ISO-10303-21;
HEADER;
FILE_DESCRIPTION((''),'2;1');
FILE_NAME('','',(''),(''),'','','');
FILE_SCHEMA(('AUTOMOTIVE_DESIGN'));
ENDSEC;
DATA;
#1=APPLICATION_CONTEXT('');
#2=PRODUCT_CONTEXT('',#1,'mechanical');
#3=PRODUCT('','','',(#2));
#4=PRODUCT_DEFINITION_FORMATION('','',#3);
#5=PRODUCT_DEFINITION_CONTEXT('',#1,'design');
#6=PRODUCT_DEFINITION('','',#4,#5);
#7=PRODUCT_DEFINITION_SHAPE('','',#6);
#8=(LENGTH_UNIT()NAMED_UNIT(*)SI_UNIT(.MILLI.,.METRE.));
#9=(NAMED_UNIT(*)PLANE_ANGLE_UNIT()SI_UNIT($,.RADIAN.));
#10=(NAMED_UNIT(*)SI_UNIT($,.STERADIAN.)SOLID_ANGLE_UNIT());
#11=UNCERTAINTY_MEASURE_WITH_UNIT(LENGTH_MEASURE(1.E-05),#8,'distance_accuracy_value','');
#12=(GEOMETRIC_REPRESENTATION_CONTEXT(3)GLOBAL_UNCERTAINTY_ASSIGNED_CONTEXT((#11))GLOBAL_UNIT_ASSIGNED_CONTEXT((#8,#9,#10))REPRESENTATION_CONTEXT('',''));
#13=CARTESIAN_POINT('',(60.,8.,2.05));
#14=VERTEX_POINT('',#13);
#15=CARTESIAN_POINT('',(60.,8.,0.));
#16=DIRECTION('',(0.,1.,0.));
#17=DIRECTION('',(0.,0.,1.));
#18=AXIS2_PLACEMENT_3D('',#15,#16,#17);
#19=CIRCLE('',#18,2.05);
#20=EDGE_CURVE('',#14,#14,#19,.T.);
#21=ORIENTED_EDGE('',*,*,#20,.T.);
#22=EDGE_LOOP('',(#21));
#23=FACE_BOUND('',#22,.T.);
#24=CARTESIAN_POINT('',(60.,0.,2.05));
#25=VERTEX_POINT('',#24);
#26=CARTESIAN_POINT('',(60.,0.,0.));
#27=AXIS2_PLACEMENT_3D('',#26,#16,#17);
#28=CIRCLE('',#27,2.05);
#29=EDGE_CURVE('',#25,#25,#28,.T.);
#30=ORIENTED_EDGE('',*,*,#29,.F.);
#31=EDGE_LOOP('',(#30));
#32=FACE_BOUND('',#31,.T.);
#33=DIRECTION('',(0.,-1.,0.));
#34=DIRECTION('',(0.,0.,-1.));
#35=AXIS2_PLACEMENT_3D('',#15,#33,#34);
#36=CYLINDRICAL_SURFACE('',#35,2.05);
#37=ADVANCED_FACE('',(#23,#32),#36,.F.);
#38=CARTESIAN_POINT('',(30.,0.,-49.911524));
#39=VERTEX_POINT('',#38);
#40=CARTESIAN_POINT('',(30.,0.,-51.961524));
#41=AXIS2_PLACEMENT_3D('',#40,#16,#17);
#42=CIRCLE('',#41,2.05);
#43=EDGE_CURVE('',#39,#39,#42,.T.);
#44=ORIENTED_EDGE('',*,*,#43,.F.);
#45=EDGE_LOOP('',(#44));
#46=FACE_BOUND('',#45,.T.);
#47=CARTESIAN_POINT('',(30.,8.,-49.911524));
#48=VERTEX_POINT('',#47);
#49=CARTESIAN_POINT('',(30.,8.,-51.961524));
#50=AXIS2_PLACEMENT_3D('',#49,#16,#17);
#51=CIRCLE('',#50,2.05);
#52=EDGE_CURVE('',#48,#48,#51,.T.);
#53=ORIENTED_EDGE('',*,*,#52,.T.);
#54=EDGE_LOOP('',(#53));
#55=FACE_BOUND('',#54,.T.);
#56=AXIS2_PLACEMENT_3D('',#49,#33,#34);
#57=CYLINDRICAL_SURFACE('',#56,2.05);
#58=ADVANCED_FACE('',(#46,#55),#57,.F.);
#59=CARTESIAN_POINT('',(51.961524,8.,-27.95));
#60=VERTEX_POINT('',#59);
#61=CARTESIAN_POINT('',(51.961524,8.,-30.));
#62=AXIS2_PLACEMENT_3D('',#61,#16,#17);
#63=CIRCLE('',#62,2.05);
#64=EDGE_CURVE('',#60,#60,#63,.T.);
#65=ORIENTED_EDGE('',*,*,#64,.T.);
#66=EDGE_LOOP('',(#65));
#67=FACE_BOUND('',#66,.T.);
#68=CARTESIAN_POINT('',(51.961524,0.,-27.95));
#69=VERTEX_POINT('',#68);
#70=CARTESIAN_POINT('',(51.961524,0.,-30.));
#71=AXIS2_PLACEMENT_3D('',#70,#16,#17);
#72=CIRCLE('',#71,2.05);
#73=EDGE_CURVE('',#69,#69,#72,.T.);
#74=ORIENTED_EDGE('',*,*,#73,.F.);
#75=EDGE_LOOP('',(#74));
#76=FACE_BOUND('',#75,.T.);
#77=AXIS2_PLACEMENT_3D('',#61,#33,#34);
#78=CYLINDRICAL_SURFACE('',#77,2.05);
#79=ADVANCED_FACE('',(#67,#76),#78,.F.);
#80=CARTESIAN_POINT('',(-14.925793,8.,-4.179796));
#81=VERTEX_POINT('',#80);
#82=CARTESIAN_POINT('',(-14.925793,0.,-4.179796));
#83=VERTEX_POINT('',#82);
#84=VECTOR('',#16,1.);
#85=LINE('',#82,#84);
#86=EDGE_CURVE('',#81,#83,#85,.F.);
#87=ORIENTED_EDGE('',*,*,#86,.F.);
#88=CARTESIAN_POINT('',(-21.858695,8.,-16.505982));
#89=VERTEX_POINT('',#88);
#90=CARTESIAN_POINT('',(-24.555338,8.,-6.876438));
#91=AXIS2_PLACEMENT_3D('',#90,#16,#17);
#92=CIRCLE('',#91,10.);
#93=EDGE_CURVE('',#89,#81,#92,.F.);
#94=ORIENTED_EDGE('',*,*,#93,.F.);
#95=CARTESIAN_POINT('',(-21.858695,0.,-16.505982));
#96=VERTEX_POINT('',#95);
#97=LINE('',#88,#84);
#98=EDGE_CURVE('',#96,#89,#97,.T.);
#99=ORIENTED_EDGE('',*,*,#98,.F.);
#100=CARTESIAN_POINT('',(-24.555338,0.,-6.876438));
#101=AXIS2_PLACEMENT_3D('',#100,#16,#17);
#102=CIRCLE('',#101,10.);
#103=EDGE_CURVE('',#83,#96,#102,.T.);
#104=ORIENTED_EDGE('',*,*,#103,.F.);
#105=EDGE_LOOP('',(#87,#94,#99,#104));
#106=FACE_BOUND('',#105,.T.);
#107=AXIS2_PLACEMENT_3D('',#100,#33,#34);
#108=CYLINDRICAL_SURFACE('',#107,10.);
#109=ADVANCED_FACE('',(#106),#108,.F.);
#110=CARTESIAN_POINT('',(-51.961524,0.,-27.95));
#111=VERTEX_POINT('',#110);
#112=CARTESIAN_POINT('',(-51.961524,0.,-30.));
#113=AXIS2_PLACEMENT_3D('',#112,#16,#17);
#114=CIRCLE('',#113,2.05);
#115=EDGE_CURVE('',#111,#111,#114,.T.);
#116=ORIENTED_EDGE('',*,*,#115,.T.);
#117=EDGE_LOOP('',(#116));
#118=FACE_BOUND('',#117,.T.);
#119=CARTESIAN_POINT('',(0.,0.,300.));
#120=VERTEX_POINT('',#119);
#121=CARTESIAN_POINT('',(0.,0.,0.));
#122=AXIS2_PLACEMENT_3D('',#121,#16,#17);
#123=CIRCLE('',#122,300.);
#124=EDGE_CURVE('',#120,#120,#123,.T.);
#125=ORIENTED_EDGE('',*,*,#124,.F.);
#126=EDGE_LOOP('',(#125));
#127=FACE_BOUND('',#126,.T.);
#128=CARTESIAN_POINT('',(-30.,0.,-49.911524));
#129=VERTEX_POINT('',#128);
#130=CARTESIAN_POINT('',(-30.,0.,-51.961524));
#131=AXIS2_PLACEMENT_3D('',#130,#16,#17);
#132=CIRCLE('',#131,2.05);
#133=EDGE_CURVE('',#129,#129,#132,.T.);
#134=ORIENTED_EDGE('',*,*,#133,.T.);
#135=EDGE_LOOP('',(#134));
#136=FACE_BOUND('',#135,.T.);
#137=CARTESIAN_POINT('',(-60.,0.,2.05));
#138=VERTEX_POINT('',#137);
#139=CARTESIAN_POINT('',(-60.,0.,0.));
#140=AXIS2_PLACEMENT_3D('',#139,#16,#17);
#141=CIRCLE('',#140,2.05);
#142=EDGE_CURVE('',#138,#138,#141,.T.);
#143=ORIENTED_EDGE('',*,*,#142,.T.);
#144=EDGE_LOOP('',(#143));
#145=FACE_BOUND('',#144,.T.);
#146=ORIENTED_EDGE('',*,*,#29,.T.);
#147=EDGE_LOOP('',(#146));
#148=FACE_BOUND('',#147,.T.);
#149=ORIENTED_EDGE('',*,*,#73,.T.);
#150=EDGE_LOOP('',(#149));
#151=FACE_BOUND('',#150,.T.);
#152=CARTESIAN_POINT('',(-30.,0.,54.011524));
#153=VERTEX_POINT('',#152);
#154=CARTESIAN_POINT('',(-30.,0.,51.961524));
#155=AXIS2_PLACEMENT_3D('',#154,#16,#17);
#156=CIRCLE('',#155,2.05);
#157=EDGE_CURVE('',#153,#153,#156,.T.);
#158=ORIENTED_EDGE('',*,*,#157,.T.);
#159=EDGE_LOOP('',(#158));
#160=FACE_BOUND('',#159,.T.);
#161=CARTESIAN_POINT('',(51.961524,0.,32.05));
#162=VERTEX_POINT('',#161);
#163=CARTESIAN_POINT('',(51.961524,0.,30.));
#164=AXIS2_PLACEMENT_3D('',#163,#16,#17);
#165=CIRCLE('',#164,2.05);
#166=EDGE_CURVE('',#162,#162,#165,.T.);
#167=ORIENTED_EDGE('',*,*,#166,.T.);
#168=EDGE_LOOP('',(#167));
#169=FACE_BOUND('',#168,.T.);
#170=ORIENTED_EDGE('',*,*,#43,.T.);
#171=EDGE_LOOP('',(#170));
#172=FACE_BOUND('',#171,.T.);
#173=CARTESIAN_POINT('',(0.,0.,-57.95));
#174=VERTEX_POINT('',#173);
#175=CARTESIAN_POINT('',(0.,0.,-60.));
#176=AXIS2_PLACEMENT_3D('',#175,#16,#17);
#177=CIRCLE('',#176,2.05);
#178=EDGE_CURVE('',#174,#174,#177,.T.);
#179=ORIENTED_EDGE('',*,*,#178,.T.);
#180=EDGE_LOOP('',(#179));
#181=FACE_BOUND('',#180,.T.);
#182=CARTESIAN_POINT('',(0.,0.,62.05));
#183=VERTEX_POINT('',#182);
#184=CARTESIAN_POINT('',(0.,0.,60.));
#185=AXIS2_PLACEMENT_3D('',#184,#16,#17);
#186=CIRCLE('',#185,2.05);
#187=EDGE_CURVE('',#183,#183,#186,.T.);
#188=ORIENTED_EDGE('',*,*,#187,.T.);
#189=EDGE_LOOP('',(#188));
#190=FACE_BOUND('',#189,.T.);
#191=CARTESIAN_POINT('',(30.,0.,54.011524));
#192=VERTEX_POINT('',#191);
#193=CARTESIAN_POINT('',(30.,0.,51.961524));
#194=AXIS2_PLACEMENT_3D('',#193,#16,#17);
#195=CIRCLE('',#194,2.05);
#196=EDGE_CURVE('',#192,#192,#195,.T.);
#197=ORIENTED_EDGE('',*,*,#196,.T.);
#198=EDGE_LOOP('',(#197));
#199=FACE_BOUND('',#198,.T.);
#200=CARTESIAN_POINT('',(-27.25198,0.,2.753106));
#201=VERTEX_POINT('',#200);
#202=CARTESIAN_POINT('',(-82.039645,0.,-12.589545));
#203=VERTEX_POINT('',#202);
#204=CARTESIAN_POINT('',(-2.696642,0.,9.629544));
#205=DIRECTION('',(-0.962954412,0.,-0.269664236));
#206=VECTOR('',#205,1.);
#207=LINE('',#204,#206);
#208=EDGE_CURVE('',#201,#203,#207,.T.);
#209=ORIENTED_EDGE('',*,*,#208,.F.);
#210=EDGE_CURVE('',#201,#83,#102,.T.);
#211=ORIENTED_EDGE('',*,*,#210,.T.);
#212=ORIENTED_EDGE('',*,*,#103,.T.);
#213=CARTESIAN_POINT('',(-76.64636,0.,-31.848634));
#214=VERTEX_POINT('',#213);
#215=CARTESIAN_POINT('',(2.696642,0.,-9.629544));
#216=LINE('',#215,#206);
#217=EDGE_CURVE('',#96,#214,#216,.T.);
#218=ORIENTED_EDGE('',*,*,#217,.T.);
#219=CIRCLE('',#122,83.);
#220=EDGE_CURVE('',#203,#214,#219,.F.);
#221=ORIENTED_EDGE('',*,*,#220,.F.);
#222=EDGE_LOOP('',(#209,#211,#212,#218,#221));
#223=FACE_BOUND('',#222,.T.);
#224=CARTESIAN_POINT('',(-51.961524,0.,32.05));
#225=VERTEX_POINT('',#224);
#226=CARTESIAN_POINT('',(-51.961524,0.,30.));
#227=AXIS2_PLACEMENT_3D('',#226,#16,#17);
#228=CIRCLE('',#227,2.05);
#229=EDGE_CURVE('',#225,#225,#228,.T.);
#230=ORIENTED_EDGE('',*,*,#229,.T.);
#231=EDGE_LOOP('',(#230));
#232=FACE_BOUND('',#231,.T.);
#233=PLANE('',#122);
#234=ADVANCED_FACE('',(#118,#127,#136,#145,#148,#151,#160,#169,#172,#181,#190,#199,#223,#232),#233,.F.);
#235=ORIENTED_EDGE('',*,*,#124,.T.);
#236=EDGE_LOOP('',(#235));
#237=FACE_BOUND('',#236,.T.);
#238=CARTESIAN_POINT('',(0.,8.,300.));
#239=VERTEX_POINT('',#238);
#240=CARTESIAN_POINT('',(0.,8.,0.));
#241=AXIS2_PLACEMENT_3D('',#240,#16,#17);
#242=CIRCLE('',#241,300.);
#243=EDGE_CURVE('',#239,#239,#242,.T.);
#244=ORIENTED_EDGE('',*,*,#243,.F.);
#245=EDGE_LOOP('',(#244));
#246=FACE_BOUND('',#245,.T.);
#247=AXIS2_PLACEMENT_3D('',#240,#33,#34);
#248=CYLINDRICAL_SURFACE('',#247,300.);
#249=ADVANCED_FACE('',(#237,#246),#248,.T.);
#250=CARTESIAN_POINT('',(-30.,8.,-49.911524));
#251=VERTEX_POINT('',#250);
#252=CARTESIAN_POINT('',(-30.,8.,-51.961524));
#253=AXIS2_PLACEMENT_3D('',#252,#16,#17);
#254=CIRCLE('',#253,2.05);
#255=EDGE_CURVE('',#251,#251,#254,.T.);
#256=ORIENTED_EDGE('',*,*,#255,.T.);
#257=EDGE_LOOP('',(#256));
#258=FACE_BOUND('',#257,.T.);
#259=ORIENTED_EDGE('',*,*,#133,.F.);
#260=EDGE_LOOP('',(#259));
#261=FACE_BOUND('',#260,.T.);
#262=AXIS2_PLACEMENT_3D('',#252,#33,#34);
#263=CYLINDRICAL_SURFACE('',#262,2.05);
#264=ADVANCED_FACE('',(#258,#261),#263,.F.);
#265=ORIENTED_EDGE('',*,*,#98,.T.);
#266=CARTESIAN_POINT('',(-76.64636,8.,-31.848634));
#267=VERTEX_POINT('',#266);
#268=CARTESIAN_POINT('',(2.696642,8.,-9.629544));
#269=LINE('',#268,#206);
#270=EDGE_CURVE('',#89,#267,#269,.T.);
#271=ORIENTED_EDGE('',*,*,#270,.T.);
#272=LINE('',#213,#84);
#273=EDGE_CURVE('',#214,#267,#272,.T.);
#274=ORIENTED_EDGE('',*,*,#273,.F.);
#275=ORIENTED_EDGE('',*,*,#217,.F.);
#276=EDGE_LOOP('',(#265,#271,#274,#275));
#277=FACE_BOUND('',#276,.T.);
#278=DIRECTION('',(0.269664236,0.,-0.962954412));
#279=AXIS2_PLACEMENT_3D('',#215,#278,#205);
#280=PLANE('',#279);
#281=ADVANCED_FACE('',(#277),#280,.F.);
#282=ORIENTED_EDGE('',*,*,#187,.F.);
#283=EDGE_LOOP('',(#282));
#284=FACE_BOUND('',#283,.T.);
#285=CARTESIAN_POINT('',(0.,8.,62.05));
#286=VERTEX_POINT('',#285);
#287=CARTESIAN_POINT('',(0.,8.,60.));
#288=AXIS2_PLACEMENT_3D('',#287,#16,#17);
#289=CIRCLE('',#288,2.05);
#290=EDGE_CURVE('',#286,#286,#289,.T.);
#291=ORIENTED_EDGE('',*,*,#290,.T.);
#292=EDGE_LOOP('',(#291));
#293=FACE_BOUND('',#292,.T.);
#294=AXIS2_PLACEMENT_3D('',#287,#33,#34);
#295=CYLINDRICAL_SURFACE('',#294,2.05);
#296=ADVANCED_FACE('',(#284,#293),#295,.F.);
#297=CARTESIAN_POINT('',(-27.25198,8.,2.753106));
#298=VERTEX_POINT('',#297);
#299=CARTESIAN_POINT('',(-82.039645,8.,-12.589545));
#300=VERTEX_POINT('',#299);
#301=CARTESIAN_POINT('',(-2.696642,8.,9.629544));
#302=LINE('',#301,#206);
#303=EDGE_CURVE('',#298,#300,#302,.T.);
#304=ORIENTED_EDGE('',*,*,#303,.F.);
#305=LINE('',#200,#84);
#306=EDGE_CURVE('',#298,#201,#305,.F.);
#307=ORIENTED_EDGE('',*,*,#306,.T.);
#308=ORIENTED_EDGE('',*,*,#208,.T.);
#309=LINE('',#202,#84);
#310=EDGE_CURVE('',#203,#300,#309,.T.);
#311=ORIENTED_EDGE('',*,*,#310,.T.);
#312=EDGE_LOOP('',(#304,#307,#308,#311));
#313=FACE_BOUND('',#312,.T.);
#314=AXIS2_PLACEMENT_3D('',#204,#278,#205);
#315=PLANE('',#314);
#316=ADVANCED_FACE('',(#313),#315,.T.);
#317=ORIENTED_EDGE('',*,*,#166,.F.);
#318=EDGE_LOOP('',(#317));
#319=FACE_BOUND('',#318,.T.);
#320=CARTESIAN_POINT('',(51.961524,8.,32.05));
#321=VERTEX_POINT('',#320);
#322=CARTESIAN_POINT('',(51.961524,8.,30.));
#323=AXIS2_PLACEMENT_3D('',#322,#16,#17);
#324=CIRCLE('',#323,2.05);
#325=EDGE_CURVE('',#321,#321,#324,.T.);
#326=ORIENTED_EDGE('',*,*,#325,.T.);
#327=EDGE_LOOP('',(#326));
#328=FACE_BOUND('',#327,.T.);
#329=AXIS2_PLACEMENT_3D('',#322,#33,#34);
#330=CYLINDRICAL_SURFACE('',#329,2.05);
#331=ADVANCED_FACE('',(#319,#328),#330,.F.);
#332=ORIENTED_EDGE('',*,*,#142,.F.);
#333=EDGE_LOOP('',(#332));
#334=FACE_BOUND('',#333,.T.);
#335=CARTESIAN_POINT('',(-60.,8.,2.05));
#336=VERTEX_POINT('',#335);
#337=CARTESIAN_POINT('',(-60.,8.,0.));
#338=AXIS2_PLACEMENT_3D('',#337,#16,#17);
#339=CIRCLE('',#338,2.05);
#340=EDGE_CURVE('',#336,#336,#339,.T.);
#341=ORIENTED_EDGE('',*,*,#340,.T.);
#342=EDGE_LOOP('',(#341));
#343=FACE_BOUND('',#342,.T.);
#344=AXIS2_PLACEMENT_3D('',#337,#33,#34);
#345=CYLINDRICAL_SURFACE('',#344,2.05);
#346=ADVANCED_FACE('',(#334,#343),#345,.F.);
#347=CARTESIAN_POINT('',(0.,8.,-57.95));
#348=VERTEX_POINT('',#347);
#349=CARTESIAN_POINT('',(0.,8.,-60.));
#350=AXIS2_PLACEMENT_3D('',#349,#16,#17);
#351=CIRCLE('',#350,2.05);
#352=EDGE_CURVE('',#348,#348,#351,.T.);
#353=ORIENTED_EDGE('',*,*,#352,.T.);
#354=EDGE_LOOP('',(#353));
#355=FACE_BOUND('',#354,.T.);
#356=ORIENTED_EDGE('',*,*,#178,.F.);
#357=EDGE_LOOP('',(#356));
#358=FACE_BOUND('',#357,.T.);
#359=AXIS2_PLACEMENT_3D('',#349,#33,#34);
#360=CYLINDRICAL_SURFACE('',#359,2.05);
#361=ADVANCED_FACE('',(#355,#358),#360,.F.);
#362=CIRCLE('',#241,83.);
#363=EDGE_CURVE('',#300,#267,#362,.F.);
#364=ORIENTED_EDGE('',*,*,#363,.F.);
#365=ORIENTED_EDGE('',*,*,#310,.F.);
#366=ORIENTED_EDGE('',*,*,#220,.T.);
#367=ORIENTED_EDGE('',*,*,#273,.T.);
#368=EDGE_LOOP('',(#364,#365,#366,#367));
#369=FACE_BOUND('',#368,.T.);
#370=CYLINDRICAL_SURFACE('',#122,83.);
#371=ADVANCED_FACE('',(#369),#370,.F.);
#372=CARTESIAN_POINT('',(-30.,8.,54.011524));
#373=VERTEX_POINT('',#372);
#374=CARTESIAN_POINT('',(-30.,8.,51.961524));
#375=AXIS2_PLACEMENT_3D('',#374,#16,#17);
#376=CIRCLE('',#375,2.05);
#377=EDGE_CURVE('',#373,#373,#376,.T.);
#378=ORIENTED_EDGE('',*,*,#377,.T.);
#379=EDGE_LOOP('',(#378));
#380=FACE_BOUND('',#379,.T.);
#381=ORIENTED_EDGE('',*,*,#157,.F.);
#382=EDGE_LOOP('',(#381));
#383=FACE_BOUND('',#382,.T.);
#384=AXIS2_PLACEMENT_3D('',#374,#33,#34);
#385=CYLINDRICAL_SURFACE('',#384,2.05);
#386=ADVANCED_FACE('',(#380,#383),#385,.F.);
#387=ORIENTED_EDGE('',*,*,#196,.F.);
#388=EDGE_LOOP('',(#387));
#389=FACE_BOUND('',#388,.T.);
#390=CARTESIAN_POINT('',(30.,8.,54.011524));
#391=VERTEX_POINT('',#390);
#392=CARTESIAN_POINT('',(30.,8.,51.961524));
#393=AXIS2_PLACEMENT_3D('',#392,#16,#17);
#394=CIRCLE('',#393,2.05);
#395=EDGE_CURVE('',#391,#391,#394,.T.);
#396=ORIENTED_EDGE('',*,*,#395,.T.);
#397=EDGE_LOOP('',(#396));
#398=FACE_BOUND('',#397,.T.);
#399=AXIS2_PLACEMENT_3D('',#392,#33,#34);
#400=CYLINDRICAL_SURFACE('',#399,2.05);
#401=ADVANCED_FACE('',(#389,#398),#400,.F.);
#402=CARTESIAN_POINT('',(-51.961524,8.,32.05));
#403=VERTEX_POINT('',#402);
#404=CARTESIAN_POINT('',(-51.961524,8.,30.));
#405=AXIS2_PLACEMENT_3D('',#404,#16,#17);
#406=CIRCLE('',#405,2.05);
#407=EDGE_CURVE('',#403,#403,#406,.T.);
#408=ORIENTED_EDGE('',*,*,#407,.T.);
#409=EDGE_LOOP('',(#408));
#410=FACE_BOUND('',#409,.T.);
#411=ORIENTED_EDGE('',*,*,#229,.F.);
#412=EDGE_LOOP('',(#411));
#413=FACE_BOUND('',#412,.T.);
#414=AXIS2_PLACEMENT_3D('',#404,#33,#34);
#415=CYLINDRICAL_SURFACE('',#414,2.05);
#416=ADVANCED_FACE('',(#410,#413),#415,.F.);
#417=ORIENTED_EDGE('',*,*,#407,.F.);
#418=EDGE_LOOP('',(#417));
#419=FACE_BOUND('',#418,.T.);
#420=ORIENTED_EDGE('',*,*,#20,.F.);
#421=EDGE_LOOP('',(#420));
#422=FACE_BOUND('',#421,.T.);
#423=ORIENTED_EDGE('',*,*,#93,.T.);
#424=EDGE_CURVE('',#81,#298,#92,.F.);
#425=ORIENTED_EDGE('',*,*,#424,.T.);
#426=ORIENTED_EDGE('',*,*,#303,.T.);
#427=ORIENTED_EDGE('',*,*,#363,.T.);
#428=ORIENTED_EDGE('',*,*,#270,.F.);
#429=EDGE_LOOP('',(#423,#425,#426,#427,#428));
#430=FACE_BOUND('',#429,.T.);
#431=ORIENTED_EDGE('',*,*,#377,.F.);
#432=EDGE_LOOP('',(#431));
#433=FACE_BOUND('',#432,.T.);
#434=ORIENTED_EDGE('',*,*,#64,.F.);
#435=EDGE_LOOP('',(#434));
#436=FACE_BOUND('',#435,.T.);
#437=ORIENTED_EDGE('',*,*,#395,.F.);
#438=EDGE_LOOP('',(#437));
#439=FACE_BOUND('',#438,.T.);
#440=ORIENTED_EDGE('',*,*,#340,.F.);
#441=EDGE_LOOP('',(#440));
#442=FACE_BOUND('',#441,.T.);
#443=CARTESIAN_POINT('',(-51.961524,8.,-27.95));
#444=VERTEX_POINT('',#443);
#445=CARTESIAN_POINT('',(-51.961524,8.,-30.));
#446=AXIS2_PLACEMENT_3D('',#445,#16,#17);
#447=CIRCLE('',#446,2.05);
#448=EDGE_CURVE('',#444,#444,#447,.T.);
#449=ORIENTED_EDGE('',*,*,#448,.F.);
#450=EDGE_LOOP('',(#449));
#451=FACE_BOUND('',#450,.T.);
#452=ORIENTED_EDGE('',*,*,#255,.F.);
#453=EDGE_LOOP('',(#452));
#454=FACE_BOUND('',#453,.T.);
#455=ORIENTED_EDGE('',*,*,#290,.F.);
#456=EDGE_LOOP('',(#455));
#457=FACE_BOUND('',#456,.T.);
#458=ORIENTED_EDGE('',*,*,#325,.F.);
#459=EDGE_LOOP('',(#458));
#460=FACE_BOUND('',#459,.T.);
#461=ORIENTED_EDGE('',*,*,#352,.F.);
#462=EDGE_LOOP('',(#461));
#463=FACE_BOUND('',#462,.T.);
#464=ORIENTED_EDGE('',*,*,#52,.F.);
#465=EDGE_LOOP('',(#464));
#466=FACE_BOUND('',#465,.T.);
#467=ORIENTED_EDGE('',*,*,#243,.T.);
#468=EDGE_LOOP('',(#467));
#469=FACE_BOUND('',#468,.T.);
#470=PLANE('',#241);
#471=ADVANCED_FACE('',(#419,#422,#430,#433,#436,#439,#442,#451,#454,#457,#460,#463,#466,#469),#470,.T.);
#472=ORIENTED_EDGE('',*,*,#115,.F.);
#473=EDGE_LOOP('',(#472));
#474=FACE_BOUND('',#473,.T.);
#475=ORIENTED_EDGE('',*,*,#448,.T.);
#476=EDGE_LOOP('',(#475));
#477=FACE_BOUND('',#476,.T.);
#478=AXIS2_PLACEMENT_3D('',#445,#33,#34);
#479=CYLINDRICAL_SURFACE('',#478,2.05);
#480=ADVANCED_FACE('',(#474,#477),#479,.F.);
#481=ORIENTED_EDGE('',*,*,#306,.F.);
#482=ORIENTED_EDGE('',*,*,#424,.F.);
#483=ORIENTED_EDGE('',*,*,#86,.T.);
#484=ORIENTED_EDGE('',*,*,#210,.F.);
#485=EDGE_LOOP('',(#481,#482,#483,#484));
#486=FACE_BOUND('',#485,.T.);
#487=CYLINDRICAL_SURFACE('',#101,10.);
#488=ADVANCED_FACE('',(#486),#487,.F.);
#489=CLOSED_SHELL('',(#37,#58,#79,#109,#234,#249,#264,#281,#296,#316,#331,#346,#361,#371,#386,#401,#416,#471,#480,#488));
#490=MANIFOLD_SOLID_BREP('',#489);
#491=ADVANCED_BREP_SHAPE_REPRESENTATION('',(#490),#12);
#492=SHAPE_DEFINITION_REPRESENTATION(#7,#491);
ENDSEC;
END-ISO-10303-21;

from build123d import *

# Parameters (mm, degrees)
SKETCH1_R           = 300
SKETCH1_R_2         = 2.05
BOSS_EXTRUDE1_DEPTH = 8
CUT_EXTRUDE1_DEPTH  = 425.339486732
FILLET1_R           = 10


with BuildPart() as part:
    # Sketch1 → Boss-Extrude1 (new body)
    with BuildSketch(Plane(origin=(0, 0, 0), x_dir=(1, 0, 0), z_dir=(0, 1, 0))):
        with Locations(Location((0, 0, 0), (0, 0, 270))):
            Circle(SKETCH1_R)
        with Locations(Location((0, 60, 0), (0, 0, 270))):
            Circle(SKETCH1_R_2, mode=Mode.SUBTRACT)
        with Locations(Location((30, 51.961524227, 0), (0, 0, 270))):
            Circle(SKETCH1_R_2, mode=Mode.SUBTRACT)
        with Locations(Location((51.961524227, 30, 0), (0, 0, 270))):
            Circle(SKETCH1_R_2, mode=Mode.SUBTRACT)
        with Locations(Location((60, 0, 0), (0, 0, 270))):
            Circle(SKETCH1_R_2, mode=Mode.SUBTRACT)
        with Locations(Location((51.961524227, -30, 0), (0, 0, 270))):
            Circle(SKETCH1_R_2, mode=Mode.SUBTRACT)
        with Locations(Location((30, -51.961524227, 0), (0, 0, 270))):
            Circle(SKETCH1_R_2, mode=Mode.SUBTRACT)
        with Locations(Location((0, -60, 0), (0, 0, 270))):
            Circle(SKETCH1_R_2, mode=Mode.SUBTRACT)
        with Locations(Location((-30, -51.961524227, 0), (0, 0, 270))):
            Circle(SKETCH1_R_2, mode=Mode.SUBTRACT)
        with Locations(Location((-51.961524227, -30, 0), (0, 0, 270))):
            Circle(SKETCH1_R_2, mode=Mode.SUBTRACT)
        with Locations(Location((-60, 0, 0), (0, 0, 270))):
            Circle(SKETCH1_R_2, mode=Mode.SUBTRACT)
        with Locations(Location((-51.961524227, 30, 0), (0, 0, 270))):
            Circle(SKETCH1_R_2, mode=Mode.SUBTRACT)
        with Locations(Location((-30, 51.961524227, 0), (0, 0, 270))):
            Circle(SKETCH1_R_2, mode=Mode.SUBTRACT)
    extrude(amount=BOSS_EXTRUDE1_DEPTH)

    # Sketch2 → Cut-Extrude1 (cut, through all)
    with BuildSketch(Plane(origin=(0, 8, 0), x_dir=(1, 0, 0), z_dir=(0, 1, 0))):
        with BuildLine():
            Line((-17.622435747, -5.449748467), (-82.039644988, 12.589545274))
            ThreePointArc((-82.039644988, 12.589545274), (-79.925216211, 22.38213157), (-76.646360273, 31.848633518))
            Line((-76.646360273, 31.848633518), (-12.229151031, 13.809339776))
            Line((-12.229151031, 13.809339776), (-17.622435747, -5.449748467))
        make_face()
    extrude(amount=-CUT_EXTRUDE1_DEPTH, mode=Mode.SUBTRACT)

    # Fillet1
    fillet1_edges = [part.edges().sort_by_distance(p)[0] for p in [
        (-17.622435747, 4, 5.449748467),
        (-12.229151031, 4, -13.809339776),
    ]]
    fillet(fillet1_edges, radius=FILLET1_R - 0.0001)  # a hair under: the kernel refuses the full size


solid = part.part
